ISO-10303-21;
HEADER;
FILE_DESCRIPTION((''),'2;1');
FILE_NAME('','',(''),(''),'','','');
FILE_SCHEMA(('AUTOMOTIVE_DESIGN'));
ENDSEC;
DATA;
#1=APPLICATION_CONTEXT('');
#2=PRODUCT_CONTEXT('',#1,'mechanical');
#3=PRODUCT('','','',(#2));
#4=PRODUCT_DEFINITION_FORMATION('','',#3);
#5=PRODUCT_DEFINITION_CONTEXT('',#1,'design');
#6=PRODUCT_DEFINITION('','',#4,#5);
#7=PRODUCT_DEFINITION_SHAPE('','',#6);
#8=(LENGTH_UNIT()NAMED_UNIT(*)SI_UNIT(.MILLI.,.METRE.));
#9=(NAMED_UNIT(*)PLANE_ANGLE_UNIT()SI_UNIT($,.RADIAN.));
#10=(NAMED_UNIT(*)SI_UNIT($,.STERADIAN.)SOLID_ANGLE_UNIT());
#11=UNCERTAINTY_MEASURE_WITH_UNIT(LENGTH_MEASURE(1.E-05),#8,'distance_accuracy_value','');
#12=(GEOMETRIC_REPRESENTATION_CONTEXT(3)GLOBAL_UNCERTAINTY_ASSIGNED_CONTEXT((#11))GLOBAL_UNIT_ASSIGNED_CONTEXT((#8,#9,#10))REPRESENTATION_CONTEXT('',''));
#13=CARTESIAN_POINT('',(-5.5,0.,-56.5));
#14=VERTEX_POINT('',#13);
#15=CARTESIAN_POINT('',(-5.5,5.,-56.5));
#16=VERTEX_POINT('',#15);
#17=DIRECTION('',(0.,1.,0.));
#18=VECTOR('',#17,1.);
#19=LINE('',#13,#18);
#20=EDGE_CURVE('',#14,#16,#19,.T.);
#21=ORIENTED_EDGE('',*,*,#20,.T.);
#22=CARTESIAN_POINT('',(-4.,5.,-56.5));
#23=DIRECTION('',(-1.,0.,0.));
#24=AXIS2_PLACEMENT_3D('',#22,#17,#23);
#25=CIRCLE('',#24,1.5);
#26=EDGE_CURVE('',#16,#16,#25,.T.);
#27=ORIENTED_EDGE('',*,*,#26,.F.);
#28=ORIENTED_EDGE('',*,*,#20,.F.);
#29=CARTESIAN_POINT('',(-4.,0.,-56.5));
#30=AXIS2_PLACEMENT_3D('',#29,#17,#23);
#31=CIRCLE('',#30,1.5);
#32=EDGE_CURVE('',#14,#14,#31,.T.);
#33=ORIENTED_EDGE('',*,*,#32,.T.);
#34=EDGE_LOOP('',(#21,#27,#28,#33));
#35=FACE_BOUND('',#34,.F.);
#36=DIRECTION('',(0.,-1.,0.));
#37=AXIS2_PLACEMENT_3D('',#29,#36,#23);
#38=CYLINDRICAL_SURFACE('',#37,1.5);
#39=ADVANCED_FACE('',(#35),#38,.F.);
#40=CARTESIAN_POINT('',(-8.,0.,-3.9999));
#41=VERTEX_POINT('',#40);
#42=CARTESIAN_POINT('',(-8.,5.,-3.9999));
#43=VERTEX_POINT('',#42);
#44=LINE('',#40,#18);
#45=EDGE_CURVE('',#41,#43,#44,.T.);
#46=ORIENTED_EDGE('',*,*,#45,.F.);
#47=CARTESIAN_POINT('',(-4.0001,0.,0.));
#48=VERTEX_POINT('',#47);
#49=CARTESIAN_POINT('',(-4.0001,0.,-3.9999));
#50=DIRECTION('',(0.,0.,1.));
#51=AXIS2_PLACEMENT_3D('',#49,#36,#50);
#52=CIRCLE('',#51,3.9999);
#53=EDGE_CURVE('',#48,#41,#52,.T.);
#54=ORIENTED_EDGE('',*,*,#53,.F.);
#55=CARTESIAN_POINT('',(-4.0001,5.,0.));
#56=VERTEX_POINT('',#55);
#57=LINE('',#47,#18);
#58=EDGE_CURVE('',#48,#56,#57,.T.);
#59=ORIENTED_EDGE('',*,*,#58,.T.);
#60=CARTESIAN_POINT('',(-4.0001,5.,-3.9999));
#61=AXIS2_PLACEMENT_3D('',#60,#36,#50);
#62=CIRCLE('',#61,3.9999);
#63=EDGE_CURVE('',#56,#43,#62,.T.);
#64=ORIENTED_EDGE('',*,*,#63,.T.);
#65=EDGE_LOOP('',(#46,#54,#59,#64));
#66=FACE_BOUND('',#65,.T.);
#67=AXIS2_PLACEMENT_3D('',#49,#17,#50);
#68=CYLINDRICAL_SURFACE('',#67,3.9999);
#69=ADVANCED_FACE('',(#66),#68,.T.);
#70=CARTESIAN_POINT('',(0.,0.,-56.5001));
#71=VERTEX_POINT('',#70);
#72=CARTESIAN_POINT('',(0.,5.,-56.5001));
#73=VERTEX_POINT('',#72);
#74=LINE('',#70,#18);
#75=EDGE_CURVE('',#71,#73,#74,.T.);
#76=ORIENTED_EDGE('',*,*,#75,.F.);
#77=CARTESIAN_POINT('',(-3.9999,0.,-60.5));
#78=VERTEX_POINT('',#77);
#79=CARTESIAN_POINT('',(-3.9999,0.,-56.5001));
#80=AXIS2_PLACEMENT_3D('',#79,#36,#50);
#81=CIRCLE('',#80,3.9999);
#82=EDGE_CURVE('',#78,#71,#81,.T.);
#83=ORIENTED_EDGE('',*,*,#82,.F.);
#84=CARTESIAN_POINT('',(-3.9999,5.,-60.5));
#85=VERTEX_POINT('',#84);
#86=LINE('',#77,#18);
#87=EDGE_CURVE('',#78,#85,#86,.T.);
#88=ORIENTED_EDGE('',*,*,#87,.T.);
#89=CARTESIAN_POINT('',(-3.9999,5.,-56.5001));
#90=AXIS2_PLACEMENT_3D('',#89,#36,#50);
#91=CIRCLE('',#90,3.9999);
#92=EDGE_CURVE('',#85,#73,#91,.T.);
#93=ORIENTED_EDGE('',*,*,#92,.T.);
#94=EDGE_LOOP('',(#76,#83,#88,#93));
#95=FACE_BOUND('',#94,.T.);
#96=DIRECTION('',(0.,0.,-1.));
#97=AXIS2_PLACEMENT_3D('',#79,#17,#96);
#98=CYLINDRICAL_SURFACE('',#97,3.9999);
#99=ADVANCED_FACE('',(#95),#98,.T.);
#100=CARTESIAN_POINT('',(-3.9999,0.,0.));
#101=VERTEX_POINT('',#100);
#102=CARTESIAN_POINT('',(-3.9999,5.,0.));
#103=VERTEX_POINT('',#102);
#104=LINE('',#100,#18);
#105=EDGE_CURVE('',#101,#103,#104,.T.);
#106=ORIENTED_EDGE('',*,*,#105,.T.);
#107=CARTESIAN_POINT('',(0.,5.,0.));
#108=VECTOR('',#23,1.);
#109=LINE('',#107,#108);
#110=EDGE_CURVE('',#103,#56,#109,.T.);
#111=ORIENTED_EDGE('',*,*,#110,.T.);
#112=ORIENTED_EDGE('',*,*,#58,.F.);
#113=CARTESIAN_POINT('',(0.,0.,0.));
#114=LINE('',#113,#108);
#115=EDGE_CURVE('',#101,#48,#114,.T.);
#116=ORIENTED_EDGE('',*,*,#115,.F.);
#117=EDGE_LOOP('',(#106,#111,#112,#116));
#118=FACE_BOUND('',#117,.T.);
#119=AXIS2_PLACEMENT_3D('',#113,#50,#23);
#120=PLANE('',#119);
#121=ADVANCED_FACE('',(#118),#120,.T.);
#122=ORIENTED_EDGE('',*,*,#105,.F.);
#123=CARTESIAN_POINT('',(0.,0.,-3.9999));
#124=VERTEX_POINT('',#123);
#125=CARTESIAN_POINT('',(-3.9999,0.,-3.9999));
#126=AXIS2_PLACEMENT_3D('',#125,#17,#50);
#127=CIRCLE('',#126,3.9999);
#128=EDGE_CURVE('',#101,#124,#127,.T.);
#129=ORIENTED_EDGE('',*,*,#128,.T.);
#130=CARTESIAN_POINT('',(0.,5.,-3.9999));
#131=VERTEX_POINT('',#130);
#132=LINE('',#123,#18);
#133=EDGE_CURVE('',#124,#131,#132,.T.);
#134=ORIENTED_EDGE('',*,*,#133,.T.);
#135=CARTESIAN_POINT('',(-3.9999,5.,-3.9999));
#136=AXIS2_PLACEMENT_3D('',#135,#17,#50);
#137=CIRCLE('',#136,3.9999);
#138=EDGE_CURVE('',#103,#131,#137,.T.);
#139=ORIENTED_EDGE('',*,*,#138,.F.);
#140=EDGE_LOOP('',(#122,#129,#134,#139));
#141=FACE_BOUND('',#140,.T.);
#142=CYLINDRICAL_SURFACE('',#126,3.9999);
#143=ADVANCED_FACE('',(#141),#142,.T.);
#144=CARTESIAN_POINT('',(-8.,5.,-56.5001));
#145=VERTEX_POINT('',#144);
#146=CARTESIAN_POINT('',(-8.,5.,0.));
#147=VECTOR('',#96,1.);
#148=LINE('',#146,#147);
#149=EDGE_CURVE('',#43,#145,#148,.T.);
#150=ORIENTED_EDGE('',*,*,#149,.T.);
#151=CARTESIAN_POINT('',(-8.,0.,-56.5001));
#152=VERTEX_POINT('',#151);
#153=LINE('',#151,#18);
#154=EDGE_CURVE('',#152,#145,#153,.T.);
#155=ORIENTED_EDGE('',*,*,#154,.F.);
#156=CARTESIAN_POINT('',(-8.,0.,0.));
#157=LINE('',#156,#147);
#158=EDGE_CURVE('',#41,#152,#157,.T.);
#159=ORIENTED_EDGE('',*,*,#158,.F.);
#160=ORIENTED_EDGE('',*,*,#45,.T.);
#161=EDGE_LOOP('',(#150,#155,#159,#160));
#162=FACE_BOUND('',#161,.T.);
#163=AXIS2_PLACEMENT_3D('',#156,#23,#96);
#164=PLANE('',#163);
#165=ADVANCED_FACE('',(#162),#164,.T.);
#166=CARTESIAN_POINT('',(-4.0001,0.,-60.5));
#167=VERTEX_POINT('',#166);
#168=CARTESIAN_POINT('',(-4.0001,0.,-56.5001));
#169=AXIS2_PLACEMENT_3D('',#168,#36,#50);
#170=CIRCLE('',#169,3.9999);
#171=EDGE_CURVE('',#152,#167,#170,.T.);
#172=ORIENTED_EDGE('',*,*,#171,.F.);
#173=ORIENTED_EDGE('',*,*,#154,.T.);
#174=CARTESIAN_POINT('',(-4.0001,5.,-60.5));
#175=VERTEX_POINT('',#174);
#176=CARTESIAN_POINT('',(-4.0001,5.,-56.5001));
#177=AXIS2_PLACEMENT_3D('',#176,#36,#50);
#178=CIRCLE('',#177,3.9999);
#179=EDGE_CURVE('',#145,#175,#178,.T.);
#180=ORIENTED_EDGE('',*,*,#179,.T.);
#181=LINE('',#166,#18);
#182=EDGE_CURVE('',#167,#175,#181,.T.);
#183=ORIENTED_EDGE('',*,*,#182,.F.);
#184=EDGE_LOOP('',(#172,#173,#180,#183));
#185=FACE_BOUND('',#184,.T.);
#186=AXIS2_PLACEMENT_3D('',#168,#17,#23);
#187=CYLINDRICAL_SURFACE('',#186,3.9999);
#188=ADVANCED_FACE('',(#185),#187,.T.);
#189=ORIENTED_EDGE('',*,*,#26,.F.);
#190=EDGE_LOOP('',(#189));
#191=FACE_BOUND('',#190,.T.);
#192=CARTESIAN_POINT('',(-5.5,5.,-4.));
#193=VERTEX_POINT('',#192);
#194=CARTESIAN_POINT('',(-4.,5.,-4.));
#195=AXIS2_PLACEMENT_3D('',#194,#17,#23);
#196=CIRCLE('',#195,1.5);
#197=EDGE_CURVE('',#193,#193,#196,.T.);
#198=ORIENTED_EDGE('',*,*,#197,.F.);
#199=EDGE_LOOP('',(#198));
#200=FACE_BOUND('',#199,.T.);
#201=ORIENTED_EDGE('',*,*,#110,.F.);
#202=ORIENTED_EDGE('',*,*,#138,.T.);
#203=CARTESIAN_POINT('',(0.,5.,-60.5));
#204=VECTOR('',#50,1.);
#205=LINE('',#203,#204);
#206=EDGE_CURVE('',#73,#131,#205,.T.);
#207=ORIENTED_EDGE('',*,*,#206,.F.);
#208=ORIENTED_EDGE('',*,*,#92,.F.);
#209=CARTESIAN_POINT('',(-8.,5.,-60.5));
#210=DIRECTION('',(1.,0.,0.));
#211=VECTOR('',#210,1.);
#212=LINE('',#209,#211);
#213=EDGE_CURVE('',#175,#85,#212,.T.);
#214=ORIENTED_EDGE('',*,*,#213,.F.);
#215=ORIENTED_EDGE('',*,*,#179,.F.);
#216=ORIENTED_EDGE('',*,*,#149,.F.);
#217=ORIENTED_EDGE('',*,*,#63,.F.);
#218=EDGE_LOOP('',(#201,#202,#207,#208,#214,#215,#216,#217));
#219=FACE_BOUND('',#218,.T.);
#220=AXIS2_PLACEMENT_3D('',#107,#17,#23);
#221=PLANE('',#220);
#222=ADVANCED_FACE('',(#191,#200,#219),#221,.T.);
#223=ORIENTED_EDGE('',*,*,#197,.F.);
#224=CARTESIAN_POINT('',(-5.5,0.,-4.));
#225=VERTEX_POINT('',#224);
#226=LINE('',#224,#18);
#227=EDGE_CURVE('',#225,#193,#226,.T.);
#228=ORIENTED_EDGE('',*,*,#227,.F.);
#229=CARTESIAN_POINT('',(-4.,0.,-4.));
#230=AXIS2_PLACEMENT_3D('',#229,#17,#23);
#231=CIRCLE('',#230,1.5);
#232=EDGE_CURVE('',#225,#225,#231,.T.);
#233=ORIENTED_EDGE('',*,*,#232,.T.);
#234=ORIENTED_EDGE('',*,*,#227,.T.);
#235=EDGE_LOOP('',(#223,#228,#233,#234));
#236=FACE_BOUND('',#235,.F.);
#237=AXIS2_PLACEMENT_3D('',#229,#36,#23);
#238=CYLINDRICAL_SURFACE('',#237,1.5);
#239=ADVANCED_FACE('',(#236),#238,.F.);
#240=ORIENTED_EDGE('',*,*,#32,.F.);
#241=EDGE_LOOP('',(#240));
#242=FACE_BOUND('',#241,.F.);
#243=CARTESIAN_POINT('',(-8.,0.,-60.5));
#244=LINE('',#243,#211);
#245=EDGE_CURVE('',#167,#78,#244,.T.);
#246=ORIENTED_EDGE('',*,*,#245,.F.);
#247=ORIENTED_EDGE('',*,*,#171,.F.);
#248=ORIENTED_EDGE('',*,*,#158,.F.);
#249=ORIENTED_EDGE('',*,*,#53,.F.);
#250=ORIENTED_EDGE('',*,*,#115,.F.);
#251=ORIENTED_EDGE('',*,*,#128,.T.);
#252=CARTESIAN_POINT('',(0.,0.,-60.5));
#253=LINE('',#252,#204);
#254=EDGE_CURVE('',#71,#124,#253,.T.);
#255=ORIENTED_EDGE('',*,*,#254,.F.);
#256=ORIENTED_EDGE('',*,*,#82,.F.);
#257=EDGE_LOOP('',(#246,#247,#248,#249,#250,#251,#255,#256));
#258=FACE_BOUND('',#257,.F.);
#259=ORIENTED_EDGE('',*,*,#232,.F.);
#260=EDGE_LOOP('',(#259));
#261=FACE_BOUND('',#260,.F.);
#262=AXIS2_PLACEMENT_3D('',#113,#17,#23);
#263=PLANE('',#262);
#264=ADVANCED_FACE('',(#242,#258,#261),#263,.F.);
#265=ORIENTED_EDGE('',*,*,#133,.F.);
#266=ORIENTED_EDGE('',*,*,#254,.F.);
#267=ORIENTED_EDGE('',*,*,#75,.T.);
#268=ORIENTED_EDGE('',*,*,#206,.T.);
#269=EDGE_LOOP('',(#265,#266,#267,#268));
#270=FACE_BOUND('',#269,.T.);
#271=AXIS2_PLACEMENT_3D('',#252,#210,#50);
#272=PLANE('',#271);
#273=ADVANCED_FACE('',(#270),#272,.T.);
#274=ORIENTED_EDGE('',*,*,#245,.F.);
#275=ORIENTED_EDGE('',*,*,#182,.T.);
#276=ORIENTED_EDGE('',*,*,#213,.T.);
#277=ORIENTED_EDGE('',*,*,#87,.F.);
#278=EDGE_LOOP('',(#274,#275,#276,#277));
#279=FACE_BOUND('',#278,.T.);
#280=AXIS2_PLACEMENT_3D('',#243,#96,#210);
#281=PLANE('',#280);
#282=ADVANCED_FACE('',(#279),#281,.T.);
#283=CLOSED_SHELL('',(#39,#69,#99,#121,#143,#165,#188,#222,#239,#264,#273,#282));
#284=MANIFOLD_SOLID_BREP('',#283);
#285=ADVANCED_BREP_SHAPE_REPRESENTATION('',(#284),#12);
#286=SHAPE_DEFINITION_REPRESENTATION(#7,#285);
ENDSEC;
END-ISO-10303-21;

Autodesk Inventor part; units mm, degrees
ref_plane "YZ Plane" through (0, 0, 0) normal (1, 0, 0) x (0, 1, 0)
ref_plane "XZ Plane" through (0, 0, 0) normal (0, 1, 0) x (-1, 0, 0)
ref_plane "XY Plane" through (0, 0, 0) normal (0, 0, 1) x (1, 0, 0)
sketch "Esquisse1" plane through (0, 0, 0) normal (0, 1, 0) x (-1, 0, 0)
  line L0 (0, 0) -> (8, 0)
  line L1 (8, 0) -> (8, -60.5)
  line L2 (8, -60.5) -> (0, -60.5)
  line L3 (0, -60.5) -> (0, 0)
  circle A0 centre (4, -4) radius 1.5
  circle A1 centre (4, -56.5) radius 1.5
  dimension "d1" = 8
  dimension "d2" = 3
  dimension "d3" = 4
  dimension "d4" = 4
  dimension "d5" = 4
  dimension "d6" = 4
  dimension "d7" = 3
  dimension "d11" = 52.5
extrude "Extrusion1" add sketch "Esquisse1" along normal blind 5
fillet "Congé1" radius 4 4 edges at (-8, 2.5, 0) (0, 2.5, 0) (0, 2.5, -60.5) (-8, 2.5, -60.5)
equation "\"d3\" = 0.5 * d1"
equation "\"d4\" = d3"
equation "\"d5\" = d3"
equation "\"d6\" = d5"
equation "\"d7\" = d2"
properties part number "biellette1" material "Acier inoxydable"
